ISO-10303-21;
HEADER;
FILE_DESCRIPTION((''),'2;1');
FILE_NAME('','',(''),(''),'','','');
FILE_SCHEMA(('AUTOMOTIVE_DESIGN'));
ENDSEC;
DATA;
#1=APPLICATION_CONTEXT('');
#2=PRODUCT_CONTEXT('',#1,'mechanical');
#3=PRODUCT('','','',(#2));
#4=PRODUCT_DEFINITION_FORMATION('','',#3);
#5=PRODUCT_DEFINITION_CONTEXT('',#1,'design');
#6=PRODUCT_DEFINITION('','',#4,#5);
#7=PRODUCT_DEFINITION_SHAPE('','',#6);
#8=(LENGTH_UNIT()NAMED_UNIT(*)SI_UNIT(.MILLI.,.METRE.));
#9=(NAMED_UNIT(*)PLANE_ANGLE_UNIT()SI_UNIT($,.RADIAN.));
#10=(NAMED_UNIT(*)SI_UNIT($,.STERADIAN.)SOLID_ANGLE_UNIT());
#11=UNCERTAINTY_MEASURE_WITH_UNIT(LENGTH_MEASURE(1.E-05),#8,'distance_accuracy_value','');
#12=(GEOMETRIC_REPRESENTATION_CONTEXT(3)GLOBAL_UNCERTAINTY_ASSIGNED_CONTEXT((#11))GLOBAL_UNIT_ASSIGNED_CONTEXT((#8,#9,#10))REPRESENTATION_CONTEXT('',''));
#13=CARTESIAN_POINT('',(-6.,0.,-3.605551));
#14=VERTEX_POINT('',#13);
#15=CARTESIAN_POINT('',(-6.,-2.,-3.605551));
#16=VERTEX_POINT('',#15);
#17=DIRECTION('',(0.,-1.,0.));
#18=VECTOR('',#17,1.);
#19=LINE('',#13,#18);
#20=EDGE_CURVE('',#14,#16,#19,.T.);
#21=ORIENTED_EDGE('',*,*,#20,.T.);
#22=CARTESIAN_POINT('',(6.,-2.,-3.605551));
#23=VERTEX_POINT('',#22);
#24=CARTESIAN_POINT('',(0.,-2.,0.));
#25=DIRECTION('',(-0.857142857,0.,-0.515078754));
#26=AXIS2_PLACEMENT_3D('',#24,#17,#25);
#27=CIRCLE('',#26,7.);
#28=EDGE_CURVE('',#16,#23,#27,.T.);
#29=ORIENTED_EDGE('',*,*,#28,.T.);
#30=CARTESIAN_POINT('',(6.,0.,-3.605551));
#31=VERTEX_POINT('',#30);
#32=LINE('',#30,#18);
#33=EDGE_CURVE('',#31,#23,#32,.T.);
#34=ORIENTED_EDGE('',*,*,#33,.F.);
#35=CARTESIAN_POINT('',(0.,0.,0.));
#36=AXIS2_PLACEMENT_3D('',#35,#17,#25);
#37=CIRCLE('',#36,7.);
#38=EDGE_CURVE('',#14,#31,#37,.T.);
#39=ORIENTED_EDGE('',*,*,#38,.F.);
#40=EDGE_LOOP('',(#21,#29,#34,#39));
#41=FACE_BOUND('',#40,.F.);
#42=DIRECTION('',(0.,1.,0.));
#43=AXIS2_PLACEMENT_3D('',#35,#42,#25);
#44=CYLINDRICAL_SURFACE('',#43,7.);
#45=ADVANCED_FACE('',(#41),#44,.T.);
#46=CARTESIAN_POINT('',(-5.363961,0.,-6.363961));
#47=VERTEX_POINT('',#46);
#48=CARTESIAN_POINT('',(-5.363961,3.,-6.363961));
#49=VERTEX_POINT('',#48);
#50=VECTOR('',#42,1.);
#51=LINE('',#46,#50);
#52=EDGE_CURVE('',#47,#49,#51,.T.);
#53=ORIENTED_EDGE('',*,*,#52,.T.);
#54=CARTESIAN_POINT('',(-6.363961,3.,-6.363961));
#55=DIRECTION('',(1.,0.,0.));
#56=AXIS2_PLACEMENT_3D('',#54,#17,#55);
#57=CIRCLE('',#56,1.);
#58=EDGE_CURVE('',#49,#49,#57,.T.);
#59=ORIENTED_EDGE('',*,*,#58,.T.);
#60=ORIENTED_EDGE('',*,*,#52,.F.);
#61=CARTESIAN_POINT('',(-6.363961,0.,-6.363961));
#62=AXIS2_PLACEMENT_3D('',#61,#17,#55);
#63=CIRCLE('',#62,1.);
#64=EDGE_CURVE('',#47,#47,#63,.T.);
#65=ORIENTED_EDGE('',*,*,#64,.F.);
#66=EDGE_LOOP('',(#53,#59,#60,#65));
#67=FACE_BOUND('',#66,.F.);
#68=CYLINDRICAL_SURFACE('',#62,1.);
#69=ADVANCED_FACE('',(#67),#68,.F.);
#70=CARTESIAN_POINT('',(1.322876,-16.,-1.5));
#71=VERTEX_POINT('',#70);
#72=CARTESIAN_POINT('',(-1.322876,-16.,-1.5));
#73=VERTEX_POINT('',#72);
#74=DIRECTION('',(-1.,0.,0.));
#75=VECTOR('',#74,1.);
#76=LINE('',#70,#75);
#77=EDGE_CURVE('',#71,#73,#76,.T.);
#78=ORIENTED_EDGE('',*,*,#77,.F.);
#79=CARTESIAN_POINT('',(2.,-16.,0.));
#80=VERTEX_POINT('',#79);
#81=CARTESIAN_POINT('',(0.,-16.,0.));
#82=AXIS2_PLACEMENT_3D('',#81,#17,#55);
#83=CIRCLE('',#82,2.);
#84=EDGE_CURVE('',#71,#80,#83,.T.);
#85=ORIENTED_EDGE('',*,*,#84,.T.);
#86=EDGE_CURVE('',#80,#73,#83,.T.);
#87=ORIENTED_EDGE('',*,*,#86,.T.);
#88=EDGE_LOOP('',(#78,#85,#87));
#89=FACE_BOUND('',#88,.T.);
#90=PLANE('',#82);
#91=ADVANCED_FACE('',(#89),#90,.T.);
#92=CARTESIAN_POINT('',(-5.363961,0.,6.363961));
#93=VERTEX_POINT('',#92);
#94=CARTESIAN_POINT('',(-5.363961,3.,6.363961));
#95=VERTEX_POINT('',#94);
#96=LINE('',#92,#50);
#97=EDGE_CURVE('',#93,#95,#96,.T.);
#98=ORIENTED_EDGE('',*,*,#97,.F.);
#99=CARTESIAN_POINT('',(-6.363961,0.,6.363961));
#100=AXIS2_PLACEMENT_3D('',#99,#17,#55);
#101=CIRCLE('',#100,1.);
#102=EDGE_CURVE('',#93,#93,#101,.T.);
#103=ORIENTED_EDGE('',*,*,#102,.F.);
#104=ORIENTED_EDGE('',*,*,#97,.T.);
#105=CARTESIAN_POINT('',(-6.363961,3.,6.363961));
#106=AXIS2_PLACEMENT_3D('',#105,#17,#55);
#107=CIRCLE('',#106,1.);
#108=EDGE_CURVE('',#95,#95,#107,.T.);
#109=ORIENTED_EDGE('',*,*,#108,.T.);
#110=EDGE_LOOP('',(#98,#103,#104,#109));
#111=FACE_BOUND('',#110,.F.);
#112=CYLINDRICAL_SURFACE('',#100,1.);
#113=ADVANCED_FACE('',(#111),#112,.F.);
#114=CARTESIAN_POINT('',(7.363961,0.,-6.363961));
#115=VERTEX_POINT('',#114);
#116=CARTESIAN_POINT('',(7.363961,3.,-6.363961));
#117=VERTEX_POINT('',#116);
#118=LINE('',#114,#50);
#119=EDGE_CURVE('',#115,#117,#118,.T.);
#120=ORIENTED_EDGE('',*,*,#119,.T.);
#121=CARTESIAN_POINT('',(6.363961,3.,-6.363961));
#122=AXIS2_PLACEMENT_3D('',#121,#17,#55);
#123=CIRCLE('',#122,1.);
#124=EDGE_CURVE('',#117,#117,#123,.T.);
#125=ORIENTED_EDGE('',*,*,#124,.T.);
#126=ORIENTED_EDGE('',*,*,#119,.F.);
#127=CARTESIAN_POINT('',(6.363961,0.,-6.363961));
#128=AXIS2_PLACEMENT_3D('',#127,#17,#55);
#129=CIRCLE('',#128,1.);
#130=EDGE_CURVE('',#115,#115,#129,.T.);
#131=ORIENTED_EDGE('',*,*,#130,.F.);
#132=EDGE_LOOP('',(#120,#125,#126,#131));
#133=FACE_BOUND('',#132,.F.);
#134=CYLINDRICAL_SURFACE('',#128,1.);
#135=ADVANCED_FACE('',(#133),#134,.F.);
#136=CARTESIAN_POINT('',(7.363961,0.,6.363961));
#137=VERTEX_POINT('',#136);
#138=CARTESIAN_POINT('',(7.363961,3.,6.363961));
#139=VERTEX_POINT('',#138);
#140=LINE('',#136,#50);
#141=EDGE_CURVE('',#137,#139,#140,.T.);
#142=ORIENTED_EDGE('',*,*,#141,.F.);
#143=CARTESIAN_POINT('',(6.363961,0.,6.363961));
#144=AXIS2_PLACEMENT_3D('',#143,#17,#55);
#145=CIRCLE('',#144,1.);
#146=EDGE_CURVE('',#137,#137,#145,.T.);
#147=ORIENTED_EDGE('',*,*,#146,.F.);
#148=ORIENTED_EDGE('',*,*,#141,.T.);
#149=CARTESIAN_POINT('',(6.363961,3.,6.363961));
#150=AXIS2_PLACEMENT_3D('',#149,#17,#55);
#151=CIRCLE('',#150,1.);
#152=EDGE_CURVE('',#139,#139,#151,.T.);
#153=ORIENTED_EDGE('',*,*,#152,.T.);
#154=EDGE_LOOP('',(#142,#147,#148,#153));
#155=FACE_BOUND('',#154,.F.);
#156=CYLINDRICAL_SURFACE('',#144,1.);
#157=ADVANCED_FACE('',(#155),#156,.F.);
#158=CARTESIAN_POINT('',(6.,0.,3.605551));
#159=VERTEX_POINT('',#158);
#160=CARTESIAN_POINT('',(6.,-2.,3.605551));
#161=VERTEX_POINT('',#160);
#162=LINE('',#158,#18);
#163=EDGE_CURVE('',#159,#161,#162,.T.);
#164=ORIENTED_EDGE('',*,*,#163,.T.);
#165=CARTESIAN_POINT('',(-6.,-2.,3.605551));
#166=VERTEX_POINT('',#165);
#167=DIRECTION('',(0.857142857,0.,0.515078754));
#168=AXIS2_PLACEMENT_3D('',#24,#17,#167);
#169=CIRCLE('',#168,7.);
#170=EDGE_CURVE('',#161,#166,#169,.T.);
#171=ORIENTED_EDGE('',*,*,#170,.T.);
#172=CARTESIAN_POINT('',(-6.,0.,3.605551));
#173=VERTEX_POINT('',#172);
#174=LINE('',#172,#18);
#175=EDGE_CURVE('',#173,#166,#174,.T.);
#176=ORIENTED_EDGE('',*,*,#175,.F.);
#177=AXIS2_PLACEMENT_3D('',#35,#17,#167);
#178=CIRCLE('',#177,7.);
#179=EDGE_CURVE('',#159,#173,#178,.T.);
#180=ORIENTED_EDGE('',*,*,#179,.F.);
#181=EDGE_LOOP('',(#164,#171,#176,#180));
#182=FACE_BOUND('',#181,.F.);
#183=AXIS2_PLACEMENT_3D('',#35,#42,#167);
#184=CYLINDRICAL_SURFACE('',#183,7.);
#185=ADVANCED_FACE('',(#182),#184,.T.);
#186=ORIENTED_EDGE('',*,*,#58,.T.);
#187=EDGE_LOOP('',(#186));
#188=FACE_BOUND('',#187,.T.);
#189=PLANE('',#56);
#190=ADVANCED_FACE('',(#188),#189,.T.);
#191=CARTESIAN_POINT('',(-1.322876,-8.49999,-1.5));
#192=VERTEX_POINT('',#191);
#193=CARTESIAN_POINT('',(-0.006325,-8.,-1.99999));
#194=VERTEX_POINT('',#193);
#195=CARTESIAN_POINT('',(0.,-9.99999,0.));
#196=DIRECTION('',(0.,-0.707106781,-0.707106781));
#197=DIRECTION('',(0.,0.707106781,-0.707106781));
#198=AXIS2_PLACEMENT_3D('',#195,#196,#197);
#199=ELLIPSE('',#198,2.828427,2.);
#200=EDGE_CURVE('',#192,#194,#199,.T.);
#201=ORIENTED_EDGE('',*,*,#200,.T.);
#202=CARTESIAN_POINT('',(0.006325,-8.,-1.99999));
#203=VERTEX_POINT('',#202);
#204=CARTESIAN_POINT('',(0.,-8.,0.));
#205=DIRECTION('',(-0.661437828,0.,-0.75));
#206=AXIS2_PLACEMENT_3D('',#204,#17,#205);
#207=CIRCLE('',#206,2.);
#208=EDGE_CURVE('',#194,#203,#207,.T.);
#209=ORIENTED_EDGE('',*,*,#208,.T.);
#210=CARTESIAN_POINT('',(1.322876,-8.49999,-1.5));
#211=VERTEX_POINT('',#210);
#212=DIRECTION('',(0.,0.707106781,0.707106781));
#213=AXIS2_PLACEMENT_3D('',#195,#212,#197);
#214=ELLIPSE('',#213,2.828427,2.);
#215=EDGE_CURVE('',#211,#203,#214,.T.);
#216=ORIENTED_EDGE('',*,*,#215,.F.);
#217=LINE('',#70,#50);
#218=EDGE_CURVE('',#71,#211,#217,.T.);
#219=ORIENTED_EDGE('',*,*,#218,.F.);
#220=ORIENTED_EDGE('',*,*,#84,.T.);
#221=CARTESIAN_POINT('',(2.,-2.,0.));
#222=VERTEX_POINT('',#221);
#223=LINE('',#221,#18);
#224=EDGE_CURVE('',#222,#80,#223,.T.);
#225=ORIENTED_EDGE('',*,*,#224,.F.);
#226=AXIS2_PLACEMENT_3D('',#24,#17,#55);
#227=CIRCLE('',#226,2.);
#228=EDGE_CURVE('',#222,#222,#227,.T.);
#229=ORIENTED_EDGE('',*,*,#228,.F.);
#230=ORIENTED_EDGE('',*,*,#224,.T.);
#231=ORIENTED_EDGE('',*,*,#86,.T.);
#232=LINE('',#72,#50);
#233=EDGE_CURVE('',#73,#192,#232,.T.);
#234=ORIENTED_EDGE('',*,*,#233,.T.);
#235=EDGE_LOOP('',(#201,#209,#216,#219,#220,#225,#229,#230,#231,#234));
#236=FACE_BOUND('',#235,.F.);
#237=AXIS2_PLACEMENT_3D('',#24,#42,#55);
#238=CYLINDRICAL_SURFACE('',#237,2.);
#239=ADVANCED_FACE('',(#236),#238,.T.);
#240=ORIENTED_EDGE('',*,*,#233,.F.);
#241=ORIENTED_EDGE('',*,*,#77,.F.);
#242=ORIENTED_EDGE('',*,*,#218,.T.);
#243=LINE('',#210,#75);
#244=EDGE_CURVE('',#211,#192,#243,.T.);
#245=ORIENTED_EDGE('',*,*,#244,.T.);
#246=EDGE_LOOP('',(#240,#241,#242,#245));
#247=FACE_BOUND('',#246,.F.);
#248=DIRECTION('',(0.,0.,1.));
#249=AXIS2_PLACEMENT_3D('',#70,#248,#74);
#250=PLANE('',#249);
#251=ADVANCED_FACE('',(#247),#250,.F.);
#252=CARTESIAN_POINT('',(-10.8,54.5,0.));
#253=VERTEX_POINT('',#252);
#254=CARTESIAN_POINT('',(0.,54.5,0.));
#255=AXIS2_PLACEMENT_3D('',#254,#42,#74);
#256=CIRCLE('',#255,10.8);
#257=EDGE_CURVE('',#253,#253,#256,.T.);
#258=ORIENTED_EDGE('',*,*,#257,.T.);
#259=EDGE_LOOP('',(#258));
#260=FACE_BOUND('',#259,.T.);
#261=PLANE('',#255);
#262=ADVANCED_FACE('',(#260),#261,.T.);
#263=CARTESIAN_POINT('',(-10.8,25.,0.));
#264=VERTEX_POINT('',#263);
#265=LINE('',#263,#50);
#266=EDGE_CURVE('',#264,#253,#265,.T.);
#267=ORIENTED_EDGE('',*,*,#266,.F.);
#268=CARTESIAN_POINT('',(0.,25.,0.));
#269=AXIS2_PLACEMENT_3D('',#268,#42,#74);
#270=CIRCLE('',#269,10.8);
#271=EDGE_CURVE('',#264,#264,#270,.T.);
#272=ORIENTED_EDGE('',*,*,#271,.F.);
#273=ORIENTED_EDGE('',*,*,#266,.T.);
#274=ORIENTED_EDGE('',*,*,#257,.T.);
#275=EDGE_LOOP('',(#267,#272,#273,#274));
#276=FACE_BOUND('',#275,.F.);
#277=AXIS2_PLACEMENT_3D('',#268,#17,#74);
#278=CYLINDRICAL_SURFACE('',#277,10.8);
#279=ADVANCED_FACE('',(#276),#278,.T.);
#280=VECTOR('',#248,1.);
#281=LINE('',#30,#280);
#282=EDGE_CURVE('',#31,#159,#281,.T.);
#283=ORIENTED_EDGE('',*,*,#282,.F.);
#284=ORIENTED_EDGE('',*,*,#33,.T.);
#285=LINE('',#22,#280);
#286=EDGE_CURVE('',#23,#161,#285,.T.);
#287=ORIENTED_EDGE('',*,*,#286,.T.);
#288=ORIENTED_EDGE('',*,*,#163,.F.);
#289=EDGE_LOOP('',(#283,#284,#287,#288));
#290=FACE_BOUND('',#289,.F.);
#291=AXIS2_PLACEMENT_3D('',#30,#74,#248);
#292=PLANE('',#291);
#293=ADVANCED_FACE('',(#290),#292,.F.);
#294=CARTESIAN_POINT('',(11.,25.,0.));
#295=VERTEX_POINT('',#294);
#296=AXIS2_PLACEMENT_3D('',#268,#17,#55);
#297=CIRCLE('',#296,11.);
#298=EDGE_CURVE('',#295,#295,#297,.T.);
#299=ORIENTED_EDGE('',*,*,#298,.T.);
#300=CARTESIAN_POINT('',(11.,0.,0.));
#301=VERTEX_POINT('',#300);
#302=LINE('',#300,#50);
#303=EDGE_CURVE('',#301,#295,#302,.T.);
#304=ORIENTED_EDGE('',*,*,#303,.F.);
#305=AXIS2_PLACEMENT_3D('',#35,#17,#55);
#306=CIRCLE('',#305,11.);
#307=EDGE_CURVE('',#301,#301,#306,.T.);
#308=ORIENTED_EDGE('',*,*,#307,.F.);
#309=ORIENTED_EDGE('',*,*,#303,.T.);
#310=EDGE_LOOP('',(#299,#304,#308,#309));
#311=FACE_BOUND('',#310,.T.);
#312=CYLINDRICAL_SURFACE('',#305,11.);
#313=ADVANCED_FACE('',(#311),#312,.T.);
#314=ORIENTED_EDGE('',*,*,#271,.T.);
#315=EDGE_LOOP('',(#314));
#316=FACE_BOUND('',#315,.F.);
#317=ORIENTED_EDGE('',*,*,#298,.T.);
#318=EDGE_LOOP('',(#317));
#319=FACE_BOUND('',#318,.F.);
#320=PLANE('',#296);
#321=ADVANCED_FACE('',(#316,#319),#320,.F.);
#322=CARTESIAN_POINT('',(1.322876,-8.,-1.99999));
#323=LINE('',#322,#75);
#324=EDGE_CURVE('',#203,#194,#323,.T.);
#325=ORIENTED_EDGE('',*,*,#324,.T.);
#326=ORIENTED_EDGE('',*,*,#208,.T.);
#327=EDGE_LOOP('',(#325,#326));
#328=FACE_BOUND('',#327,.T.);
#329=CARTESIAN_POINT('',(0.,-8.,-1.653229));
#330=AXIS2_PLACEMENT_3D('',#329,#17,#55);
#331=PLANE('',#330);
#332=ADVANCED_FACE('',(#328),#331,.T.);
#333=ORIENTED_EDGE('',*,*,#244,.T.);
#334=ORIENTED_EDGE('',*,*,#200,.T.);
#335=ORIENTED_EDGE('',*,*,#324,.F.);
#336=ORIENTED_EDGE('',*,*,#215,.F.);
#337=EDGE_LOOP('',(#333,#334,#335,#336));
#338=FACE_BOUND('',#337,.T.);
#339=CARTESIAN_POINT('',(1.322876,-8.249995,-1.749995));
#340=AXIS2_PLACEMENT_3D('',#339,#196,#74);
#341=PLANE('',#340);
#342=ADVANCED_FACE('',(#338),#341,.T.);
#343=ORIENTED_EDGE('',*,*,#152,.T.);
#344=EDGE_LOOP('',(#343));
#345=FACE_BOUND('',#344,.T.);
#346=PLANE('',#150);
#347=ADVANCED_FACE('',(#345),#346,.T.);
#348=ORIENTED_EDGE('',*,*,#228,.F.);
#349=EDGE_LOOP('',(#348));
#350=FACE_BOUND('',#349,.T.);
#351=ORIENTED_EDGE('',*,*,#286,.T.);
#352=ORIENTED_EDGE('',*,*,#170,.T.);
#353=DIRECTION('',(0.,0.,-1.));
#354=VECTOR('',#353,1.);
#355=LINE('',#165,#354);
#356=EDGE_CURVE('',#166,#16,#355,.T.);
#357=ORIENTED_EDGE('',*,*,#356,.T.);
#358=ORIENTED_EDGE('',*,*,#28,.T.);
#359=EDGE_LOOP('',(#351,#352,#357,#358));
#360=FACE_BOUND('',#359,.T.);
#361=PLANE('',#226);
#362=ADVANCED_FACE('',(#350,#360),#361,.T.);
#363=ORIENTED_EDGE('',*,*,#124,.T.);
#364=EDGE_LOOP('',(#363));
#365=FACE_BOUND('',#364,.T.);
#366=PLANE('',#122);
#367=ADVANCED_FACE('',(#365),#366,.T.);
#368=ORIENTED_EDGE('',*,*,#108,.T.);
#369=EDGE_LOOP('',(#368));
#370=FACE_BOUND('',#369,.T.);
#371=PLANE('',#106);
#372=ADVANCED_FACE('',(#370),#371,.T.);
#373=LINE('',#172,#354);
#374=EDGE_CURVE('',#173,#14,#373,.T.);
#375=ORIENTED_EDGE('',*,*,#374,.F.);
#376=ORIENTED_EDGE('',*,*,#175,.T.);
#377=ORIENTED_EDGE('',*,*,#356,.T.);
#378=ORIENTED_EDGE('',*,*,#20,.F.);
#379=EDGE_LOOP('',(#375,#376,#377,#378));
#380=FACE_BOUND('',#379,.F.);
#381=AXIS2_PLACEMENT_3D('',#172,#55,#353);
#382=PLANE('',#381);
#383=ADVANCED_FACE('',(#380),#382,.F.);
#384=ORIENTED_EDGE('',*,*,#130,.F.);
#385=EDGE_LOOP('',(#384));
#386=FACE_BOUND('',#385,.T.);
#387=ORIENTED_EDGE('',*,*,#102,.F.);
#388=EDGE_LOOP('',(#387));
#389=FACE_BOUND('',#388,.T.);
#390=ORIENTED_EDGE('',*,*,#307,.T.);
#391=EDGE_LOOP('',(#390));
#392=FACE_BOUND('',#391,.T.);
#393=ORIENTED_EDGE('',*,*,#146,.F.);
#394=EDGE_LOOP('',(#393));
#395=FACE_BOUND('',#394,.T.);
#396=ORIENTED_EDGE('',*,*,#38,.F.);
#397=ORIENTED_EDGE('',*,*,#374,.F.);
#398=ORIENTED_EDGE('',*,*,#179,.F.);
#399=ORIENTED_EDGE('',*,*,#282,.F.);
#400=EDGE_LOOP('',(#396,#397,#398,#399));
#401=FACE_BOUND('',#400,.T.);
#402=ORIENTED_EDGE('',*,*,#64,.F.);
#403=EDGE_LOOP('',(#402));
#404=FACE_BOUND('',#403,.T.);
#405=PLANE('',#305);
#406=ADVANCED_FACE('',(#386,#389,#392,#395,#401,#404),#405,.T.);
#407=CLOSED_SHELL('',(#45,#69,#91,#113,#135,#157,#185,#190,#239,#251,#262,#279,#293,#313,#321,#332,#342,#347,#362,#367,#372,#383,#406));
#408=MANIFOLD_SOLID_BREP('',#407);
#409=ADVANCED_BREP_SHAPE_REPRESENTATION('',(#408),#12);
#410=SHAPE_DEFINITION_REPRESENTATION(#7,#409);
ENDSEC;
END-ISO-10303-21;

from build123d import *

# Parameters (mm, degrees)
F0_R      = 11
F1_DEPTH  = 25
F2_R      = 10.8
F3_DEPTH  = 29.5
F5_DEPTH  = 2
F6_R      = 2
F7_DEPTH  = 14
F9_DEPTH  = 8
F10_SIZE  = 0.49999
F11_R     = 1
F12_DEPTH = 3


# Not quite as in the source:
# - a fillet or chamfer is up to 0.001 mm smaller than in the source, because OpenCascade refuses the exact size


with BuildPart() as f1:
    # F0 (on Front) → F1 (new body)
    with BuildSketch(Plane.XZ):
        Circle(F0_R)
    extrude(amount=-F1_DEPTH)

    # F2 (on face) → F3 (join)
    with BuildSketch(Plane(origin=(0, 25, 0), x_dir=(-1, 0, 0), z_dir=(0, 1, 0))):
        Circle(F2_R)
    extrude(amount=F3_DEPTH)

    # F4 (on face) → F5 (join)
    with BuildSketch(Plane.XZ):
        with BuildLine():
            Line((6, -3.6055512755), (6, 3.6055512755))
            ThreePointArc((6, 3.6055512755), (0, 7), (-6, 3.6055512755))
            Line((-6, 3.6055512755), (-6, -3.6055512755))
            ThreePointArc((-6, -3.6055512755), (0, -7), (6, -3.6055512755))
        make_face()
    extrude(amount=F5_DEPTH)

    # F6 (on face) → F7 (join)
    with BuildSketch(Plane.XZ.offset(2)):
        Circle(F6_R)
    extrude(amount=F7_DEPTH)

    # F8 (on face) → F9 (cut)
    with BuildSketch(Plane.XZ.offset(16)):
        with BuildLine():
            ThreePointArc((-1.3228756555, -1.5), (0, -2), (1.3228756555, -1.5))
            Line((1.3228756555, -1.5), (-1.3228756555, -1.5))
        make_face()
    extrude(amount=-F9_DEPTH, mode=Mode.SUBTRACT)

    # F10 (size 0.5 in the source; OpenCascade refuses exactly that, so slightly less here)
    f10_edges = [f1.edges().sort_by_distance(p)[0] for p in [
        (0, -8, -1.5),
    ]]
    chamfer(f10_edges, length=F10_SIZE)

    # F11 (on face) → F12 (cut)
    with BuildSketch(Plane.XZ):
        with Locations((6.3639610307, -6.3639610307)):
            Circle(F11_R)
        with Locations((-6.3639610307, -6.3639610307)):
            Circle(F11_R)
        with Locations((-6.3639610307, 6.3639610307)):
            Circle(F11_R)
        with Locations((6.3639610307, 6.3639610307)):
            Circle(F11_R)
    extrude(amount=-F12_DEPTH, mode=Mode.SUBTRACT)


solid = f1.part
